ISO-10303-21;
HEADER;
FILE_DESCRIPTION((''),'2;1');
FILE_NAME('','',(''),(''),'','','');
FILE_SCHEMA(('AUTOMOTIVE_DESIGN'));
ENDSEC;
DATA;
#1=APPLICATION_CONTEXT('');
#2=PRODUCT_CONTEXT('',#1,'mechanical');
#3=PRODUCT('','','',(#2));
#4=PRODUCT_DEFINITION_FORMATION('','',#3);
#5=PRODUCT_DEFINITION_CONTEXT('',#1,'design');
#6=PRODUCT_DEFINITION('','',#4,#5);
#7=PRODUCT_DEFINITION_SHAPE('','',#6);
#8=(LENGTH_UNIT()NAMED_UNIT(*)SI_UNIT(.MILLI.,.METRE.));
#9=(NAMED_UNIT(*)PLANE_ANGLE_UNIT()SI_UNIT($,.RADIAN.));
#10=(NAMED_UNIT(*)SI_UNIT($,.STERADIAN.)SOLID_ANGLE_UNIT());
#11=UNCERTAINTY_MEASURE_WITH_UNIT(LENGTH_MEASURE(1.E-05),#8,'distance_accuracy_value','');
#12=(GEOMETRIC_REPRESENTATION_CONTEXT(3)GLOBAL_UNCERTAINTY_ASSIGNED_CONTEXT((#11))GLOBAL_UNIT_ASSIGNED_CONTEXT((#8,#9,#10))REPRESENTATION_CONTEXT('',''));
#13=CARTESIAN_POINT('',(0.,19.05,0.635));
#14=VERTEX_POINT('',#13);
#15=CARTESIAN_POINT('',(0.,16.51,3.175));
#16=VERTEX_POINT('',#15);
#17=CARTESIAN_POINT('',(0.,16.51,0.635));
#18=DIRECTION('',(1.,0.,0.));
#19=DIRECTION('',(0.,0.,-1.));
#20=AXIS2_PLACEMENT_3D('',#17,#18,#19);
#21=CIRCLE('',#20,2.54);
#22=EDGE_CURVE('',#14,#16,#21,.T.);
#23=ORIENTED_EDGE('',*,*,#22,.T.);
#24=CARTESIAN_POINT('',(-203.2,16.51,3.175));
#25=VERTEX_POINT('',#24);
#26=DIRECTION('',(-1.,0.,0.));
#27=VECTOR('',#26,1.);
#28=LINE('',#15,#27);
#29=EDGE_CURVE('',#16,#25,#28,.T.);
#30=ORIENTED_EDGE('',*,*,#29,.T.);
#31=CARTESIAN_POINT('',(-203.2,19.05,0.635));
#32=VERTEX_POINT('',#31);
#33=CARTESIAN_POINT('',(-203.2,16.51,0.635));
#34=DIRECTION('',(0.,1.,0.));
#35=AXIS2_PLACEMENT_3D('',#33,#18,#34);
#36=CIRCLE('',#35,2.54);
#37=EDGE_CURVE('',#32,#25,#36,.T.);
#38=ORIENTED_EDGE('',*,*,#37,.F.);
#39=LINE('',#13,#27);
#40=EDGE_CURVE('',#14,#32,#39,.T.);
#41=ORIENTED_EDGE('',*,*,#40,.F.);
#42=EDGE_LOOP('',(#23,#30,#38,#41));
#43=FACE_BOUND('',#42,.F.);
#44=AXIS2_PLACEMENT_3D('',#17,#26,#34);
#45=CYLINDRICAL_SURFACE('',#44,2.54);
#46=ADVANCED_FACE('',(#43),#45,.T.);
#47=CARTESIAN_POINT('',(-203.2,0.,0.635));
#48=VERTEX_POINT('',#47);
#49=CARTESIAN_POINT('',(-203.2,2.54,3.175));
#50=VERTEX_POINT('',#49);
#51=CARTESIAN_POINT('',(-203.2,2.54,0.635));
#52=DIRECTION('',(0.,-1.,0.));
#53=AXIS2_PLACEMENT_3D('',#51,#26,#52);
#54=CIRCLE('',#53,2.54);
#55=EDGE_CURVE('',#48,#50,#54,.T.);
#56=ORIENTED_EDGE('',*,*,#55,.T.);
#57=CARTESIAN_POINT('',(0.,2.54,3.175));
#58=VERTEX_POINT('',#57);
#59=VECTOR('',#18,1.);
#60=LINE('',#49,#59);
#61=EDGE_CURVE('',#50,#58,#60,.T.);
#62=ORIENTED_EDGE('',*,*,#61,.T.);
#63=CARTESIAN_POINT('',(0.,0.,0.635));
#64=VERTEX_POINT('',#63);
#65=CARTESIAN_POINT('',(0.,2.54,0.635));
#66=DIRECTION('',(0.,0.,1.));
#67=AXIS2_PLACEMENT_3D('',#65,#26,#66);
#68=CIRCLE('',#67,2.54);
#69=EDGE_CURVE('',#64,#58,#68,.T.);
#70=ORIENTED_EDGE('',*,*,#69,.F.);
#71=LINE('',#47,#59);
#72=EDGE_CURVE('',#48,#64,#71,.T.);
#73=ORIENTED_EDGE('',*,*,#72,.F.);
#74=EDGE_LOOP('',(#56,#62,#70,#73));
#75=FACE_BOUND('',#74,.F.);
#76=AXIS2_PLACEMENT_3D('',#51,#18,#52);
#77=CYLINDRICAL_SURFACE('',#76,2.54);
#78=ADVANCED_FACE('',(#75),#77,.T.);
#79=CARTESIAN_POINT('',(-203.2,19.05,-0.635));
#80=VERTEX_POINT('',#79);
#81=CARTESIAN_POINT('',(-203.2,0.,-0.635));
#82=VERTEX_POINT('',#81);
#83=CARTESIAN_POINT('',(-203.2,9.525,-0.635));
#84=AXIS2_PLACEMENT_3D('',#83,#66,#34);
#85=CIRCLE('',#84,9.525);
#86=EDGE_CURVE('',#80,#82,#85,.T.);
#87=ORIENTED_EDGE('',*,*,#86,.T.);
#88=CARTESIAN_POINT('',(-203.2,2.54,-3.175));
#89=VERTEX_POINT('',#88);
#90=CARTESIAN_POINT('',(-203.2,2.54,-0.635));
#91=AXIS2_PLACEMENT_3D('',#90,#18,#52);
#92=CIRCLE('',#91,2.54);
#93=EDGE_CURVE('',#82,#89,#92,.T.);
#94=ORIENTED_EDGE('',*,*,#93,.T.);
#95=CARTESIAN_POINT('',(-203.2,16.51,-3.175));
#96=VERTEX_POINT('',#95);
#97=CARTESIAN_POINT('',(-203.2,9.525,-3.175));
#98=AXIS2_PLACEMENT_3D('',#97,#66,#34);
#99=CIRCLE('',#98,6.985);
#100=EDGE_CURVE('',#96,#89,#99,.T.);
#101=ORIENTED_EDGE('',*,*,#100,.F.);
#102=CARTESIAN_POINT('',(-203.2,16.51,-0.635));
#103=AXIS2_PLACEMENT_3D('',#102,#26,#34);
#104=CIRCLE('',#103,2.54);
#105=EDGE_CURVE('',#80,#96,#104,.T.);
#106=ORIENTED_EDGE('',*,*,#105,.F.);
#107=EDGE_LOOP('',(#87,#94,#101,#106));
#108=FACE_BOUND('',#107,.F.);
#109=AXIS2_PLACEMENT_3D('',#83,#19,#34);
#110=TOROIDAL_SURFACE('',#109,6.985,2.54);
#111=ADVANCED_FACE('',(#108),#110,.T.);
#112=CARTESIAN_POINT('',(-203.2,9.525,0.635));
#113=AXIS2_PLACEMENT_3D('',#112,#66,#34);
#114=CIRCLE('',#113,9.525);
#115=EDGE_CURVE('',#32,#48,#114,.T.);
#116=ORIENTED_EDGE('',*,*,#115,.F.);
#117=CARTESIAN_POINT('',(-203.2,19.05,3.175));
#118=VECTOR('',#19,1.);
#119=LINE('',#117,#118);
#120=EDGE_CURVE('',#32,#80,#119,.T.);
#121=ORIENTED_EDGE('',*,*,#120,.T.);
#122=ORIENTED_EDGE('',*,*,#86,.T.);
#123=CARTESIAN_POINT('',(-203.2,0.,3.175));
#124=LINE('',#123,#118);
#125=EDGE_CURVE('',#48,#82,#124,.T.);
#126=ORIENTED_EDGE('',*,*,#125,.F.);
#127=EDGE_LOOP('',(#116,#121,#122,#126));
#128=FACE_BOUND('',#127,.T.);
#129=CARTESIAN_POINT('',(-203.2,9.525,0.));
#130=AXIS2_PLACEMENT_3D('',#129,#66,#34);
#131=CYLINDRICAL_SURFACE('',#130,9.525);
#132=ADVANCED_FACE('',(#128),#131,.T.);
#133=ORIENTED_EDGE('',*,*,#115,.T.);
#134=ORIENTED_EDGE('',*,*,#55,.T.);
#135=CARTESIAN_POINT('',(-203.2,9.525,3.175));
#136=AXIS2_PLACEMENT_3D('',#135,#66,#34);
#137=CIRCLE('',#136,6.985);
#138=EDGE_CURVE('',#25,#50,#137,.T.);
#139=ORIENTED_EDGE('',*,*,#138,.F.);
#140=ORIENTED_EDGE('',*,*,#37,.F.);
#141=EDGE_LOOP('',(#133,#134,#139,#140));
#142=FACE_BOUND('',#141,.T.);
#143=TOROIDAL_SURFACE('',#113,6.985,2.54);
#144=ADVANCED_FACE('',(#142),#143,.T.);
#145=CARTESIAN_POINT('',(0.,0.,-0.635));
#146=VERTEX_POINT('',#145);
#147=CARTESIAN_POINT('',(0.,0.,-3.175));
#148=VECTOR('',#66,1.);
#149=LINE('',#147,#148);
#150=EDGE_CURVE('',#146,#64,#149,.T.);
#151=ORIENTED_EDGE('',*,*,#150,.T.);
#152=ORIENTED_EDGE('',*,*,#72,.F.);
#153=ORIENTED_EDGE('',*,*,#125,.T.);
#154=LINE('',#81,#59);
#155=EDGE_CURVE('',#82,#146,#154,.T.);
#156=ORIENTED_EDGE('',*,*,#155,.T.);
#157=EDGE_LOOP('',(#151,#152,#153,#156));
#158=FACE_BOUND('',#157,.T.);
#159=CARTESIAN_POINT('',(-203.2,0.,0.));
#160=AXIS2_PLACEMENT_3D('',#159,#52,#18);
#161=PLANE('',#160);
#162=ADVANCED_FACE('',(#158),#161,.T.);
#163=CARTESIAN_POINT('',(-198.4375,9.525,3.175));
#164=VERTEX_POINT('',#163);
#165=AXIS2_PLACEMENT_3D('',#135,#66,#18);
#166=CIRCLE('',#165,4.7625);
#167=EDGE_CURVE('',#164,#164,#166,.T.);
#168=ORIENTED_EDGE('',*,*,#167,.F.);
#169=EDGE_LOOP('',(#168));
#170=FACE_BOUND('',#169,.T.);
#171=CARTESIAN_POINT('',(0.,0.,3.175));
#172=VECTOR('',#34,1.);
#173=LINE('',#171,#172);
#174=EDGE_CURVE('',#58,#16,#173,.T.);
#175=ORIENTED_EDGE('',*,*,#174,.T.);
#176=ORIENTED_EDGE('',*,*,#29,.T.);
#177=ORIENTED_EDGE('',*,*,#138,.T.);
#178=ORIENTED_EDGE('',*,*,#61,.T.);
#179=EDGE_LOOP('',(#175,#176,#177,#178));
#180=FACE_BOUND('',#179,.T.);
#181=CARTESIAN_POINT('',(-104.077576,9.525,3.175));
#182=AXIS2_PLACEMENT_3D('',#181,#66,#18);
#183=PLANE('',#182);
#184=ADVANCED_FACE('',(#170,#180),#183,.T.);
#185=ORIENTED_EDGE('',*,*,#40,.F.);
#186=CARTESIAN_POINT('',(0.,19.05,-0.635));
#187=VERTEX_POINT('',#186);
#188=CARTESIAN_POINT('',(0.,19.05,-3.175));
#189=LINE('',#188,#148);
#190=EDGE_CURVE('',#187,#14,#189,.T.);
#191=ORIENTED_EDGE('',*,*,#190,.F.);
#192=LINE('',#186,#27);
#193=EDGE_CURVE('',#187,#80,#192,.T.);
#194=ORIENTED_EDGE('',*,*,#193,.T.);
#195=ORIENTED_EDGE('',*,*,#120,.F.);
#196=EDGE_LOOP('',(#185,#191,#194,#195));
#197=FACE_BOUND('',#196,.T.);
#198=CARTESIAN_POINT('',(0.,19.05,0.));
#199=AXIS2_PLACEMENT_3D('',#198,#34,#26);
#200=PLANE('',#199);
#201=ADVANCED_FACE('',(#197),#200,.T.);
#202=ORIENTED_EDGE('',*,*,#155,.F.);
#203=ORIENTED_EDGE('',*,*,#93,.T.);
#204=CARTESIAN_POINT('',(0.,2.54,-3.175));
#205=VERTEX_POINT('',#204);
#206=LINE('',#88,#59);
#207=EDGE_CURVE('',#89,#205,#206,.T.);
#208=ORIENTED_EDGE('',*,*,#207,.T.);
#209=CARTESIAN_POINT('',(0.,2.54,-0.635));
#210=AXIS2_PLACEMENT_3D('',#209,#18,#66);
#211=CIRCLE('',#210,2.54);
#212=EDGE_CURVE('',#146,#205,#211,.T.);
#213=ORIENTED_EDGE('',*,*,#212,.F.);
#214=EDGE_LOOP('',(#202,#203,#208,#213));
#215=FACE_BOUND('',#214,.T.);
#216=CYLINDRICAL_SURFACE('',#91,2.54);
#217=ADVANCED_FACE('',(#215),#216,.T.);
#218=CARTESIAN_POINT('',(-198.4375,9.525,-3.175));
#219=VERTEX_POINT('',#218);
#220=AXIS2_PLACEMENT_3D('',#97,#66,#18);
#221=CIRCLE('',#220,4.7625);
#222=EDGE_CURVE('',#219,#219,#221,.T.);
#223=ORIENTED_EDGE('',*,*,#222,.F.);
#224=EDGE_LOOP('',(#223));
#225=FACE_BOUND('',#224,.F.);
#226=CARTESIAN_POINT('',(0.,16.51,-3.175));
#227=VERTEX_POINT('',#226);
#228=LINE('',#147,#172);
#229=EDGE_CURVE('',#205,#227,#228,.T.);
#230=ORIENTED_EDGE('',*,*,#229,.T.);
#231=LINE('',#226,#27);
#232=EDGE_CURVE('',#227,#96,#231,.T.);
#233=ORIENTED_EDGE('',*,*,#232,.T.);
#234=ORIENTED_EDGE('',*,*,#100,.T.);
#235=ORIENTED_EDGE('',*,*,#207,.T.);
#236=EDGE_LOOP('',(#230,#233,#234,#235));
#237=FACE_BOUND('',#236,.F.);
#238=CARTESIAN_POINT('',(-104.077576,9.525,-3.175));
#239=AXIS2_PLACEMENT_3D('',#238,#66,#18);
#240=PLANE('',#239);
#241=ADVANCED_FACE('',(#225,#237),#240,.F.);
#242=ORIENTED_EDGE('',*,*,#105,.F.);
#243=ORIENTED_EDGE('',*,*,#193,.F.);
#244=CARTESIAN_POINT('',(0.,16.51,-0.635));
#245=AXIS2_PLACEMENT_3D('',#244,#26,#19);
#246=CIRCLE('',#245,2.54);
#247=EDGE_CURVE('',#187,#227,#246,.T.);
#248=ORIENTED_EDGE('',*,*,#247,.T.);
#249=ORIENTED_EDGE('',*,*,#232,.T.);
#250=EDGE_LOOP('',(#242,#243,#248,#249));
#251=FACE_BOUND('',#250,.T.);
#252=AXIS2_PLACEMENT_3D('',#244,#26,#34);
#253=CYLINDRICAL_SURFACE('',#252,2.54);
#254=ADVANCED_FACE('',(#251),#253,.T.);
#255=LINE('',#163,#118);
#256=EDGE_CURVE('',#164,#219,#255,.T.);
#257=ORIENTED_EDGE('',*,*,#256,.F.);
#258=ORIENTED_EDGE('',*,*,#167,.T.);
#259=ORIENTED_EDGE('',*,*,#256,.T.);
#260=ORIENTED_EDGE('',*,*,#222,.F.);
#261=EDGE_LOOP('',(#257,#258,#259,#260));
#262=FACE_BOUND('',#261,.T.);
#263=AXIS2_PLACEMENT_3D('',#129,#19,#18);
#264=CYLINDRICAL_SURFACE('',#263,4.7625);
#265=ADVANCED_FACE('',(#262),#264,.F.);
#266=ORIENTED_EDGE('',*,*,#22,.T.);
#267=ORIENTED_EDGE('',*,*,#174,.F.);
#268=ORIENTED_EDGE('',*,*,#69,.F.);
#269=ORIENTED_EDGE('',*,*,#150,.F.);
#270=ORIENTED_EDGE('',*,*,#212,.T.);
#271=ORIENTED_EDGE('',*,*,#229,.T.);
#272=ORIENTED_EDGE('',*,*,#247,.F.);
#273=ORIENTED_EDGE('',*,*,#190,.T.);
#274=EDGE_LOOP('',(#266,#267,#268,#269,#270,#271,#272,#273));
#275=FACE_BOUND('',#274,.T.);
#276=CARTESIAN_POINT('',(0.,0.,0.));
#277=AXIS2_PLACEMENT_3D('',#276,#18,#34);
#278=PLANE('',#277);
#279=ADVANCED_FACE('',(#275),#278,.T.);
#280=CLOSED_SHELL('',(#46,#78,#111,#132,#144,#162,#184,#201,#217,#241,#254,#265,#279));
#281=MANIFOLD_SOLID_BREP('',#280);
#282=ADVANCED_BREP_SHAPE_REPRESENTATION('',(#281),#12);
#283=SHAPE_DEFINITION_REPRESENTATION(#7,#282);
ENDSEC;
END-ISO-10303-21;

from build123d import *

# Parameters (mm, degrees)
F0_R     = 4.7625
F2_DEPTH = 3.175
F3_R     = 2.54


# Not quite as in the source:
# - a variable given as a bare number and used for a length is read in inches; the dataset says mm whatever the document's units were


with BuildPart() as f2:
    # F0 (on Top) → F2 (new body, symmetric)
    with BuildSketch(Plane.XY):
        with BuildLine():
            Line((-203.2, 0), (0, 0))
            Line((0, 0), (0, 19.05))
            Line((0, 19.05), (-203.2, 19.05))
            ThreePointArc((-203.2, 19.05), (-212.725, 9.525), (-203.2, 0))
        make_face()
        with Locations((-203.2, 9.525)):
            Circle(F0_R, mode=Mode.SUBTRACT)
    extrude(amount=F2_DEPTH, both=True)

    # F3
    f3_edges = [f2.edges().sort_by_distance(p)[0] for p in [
        (-101.6, 0, 3.175),
        (-101.6, 0, -3.175),
    ]]
    fillet(f3_edges, radius=F3_R)


solid = f2.part
